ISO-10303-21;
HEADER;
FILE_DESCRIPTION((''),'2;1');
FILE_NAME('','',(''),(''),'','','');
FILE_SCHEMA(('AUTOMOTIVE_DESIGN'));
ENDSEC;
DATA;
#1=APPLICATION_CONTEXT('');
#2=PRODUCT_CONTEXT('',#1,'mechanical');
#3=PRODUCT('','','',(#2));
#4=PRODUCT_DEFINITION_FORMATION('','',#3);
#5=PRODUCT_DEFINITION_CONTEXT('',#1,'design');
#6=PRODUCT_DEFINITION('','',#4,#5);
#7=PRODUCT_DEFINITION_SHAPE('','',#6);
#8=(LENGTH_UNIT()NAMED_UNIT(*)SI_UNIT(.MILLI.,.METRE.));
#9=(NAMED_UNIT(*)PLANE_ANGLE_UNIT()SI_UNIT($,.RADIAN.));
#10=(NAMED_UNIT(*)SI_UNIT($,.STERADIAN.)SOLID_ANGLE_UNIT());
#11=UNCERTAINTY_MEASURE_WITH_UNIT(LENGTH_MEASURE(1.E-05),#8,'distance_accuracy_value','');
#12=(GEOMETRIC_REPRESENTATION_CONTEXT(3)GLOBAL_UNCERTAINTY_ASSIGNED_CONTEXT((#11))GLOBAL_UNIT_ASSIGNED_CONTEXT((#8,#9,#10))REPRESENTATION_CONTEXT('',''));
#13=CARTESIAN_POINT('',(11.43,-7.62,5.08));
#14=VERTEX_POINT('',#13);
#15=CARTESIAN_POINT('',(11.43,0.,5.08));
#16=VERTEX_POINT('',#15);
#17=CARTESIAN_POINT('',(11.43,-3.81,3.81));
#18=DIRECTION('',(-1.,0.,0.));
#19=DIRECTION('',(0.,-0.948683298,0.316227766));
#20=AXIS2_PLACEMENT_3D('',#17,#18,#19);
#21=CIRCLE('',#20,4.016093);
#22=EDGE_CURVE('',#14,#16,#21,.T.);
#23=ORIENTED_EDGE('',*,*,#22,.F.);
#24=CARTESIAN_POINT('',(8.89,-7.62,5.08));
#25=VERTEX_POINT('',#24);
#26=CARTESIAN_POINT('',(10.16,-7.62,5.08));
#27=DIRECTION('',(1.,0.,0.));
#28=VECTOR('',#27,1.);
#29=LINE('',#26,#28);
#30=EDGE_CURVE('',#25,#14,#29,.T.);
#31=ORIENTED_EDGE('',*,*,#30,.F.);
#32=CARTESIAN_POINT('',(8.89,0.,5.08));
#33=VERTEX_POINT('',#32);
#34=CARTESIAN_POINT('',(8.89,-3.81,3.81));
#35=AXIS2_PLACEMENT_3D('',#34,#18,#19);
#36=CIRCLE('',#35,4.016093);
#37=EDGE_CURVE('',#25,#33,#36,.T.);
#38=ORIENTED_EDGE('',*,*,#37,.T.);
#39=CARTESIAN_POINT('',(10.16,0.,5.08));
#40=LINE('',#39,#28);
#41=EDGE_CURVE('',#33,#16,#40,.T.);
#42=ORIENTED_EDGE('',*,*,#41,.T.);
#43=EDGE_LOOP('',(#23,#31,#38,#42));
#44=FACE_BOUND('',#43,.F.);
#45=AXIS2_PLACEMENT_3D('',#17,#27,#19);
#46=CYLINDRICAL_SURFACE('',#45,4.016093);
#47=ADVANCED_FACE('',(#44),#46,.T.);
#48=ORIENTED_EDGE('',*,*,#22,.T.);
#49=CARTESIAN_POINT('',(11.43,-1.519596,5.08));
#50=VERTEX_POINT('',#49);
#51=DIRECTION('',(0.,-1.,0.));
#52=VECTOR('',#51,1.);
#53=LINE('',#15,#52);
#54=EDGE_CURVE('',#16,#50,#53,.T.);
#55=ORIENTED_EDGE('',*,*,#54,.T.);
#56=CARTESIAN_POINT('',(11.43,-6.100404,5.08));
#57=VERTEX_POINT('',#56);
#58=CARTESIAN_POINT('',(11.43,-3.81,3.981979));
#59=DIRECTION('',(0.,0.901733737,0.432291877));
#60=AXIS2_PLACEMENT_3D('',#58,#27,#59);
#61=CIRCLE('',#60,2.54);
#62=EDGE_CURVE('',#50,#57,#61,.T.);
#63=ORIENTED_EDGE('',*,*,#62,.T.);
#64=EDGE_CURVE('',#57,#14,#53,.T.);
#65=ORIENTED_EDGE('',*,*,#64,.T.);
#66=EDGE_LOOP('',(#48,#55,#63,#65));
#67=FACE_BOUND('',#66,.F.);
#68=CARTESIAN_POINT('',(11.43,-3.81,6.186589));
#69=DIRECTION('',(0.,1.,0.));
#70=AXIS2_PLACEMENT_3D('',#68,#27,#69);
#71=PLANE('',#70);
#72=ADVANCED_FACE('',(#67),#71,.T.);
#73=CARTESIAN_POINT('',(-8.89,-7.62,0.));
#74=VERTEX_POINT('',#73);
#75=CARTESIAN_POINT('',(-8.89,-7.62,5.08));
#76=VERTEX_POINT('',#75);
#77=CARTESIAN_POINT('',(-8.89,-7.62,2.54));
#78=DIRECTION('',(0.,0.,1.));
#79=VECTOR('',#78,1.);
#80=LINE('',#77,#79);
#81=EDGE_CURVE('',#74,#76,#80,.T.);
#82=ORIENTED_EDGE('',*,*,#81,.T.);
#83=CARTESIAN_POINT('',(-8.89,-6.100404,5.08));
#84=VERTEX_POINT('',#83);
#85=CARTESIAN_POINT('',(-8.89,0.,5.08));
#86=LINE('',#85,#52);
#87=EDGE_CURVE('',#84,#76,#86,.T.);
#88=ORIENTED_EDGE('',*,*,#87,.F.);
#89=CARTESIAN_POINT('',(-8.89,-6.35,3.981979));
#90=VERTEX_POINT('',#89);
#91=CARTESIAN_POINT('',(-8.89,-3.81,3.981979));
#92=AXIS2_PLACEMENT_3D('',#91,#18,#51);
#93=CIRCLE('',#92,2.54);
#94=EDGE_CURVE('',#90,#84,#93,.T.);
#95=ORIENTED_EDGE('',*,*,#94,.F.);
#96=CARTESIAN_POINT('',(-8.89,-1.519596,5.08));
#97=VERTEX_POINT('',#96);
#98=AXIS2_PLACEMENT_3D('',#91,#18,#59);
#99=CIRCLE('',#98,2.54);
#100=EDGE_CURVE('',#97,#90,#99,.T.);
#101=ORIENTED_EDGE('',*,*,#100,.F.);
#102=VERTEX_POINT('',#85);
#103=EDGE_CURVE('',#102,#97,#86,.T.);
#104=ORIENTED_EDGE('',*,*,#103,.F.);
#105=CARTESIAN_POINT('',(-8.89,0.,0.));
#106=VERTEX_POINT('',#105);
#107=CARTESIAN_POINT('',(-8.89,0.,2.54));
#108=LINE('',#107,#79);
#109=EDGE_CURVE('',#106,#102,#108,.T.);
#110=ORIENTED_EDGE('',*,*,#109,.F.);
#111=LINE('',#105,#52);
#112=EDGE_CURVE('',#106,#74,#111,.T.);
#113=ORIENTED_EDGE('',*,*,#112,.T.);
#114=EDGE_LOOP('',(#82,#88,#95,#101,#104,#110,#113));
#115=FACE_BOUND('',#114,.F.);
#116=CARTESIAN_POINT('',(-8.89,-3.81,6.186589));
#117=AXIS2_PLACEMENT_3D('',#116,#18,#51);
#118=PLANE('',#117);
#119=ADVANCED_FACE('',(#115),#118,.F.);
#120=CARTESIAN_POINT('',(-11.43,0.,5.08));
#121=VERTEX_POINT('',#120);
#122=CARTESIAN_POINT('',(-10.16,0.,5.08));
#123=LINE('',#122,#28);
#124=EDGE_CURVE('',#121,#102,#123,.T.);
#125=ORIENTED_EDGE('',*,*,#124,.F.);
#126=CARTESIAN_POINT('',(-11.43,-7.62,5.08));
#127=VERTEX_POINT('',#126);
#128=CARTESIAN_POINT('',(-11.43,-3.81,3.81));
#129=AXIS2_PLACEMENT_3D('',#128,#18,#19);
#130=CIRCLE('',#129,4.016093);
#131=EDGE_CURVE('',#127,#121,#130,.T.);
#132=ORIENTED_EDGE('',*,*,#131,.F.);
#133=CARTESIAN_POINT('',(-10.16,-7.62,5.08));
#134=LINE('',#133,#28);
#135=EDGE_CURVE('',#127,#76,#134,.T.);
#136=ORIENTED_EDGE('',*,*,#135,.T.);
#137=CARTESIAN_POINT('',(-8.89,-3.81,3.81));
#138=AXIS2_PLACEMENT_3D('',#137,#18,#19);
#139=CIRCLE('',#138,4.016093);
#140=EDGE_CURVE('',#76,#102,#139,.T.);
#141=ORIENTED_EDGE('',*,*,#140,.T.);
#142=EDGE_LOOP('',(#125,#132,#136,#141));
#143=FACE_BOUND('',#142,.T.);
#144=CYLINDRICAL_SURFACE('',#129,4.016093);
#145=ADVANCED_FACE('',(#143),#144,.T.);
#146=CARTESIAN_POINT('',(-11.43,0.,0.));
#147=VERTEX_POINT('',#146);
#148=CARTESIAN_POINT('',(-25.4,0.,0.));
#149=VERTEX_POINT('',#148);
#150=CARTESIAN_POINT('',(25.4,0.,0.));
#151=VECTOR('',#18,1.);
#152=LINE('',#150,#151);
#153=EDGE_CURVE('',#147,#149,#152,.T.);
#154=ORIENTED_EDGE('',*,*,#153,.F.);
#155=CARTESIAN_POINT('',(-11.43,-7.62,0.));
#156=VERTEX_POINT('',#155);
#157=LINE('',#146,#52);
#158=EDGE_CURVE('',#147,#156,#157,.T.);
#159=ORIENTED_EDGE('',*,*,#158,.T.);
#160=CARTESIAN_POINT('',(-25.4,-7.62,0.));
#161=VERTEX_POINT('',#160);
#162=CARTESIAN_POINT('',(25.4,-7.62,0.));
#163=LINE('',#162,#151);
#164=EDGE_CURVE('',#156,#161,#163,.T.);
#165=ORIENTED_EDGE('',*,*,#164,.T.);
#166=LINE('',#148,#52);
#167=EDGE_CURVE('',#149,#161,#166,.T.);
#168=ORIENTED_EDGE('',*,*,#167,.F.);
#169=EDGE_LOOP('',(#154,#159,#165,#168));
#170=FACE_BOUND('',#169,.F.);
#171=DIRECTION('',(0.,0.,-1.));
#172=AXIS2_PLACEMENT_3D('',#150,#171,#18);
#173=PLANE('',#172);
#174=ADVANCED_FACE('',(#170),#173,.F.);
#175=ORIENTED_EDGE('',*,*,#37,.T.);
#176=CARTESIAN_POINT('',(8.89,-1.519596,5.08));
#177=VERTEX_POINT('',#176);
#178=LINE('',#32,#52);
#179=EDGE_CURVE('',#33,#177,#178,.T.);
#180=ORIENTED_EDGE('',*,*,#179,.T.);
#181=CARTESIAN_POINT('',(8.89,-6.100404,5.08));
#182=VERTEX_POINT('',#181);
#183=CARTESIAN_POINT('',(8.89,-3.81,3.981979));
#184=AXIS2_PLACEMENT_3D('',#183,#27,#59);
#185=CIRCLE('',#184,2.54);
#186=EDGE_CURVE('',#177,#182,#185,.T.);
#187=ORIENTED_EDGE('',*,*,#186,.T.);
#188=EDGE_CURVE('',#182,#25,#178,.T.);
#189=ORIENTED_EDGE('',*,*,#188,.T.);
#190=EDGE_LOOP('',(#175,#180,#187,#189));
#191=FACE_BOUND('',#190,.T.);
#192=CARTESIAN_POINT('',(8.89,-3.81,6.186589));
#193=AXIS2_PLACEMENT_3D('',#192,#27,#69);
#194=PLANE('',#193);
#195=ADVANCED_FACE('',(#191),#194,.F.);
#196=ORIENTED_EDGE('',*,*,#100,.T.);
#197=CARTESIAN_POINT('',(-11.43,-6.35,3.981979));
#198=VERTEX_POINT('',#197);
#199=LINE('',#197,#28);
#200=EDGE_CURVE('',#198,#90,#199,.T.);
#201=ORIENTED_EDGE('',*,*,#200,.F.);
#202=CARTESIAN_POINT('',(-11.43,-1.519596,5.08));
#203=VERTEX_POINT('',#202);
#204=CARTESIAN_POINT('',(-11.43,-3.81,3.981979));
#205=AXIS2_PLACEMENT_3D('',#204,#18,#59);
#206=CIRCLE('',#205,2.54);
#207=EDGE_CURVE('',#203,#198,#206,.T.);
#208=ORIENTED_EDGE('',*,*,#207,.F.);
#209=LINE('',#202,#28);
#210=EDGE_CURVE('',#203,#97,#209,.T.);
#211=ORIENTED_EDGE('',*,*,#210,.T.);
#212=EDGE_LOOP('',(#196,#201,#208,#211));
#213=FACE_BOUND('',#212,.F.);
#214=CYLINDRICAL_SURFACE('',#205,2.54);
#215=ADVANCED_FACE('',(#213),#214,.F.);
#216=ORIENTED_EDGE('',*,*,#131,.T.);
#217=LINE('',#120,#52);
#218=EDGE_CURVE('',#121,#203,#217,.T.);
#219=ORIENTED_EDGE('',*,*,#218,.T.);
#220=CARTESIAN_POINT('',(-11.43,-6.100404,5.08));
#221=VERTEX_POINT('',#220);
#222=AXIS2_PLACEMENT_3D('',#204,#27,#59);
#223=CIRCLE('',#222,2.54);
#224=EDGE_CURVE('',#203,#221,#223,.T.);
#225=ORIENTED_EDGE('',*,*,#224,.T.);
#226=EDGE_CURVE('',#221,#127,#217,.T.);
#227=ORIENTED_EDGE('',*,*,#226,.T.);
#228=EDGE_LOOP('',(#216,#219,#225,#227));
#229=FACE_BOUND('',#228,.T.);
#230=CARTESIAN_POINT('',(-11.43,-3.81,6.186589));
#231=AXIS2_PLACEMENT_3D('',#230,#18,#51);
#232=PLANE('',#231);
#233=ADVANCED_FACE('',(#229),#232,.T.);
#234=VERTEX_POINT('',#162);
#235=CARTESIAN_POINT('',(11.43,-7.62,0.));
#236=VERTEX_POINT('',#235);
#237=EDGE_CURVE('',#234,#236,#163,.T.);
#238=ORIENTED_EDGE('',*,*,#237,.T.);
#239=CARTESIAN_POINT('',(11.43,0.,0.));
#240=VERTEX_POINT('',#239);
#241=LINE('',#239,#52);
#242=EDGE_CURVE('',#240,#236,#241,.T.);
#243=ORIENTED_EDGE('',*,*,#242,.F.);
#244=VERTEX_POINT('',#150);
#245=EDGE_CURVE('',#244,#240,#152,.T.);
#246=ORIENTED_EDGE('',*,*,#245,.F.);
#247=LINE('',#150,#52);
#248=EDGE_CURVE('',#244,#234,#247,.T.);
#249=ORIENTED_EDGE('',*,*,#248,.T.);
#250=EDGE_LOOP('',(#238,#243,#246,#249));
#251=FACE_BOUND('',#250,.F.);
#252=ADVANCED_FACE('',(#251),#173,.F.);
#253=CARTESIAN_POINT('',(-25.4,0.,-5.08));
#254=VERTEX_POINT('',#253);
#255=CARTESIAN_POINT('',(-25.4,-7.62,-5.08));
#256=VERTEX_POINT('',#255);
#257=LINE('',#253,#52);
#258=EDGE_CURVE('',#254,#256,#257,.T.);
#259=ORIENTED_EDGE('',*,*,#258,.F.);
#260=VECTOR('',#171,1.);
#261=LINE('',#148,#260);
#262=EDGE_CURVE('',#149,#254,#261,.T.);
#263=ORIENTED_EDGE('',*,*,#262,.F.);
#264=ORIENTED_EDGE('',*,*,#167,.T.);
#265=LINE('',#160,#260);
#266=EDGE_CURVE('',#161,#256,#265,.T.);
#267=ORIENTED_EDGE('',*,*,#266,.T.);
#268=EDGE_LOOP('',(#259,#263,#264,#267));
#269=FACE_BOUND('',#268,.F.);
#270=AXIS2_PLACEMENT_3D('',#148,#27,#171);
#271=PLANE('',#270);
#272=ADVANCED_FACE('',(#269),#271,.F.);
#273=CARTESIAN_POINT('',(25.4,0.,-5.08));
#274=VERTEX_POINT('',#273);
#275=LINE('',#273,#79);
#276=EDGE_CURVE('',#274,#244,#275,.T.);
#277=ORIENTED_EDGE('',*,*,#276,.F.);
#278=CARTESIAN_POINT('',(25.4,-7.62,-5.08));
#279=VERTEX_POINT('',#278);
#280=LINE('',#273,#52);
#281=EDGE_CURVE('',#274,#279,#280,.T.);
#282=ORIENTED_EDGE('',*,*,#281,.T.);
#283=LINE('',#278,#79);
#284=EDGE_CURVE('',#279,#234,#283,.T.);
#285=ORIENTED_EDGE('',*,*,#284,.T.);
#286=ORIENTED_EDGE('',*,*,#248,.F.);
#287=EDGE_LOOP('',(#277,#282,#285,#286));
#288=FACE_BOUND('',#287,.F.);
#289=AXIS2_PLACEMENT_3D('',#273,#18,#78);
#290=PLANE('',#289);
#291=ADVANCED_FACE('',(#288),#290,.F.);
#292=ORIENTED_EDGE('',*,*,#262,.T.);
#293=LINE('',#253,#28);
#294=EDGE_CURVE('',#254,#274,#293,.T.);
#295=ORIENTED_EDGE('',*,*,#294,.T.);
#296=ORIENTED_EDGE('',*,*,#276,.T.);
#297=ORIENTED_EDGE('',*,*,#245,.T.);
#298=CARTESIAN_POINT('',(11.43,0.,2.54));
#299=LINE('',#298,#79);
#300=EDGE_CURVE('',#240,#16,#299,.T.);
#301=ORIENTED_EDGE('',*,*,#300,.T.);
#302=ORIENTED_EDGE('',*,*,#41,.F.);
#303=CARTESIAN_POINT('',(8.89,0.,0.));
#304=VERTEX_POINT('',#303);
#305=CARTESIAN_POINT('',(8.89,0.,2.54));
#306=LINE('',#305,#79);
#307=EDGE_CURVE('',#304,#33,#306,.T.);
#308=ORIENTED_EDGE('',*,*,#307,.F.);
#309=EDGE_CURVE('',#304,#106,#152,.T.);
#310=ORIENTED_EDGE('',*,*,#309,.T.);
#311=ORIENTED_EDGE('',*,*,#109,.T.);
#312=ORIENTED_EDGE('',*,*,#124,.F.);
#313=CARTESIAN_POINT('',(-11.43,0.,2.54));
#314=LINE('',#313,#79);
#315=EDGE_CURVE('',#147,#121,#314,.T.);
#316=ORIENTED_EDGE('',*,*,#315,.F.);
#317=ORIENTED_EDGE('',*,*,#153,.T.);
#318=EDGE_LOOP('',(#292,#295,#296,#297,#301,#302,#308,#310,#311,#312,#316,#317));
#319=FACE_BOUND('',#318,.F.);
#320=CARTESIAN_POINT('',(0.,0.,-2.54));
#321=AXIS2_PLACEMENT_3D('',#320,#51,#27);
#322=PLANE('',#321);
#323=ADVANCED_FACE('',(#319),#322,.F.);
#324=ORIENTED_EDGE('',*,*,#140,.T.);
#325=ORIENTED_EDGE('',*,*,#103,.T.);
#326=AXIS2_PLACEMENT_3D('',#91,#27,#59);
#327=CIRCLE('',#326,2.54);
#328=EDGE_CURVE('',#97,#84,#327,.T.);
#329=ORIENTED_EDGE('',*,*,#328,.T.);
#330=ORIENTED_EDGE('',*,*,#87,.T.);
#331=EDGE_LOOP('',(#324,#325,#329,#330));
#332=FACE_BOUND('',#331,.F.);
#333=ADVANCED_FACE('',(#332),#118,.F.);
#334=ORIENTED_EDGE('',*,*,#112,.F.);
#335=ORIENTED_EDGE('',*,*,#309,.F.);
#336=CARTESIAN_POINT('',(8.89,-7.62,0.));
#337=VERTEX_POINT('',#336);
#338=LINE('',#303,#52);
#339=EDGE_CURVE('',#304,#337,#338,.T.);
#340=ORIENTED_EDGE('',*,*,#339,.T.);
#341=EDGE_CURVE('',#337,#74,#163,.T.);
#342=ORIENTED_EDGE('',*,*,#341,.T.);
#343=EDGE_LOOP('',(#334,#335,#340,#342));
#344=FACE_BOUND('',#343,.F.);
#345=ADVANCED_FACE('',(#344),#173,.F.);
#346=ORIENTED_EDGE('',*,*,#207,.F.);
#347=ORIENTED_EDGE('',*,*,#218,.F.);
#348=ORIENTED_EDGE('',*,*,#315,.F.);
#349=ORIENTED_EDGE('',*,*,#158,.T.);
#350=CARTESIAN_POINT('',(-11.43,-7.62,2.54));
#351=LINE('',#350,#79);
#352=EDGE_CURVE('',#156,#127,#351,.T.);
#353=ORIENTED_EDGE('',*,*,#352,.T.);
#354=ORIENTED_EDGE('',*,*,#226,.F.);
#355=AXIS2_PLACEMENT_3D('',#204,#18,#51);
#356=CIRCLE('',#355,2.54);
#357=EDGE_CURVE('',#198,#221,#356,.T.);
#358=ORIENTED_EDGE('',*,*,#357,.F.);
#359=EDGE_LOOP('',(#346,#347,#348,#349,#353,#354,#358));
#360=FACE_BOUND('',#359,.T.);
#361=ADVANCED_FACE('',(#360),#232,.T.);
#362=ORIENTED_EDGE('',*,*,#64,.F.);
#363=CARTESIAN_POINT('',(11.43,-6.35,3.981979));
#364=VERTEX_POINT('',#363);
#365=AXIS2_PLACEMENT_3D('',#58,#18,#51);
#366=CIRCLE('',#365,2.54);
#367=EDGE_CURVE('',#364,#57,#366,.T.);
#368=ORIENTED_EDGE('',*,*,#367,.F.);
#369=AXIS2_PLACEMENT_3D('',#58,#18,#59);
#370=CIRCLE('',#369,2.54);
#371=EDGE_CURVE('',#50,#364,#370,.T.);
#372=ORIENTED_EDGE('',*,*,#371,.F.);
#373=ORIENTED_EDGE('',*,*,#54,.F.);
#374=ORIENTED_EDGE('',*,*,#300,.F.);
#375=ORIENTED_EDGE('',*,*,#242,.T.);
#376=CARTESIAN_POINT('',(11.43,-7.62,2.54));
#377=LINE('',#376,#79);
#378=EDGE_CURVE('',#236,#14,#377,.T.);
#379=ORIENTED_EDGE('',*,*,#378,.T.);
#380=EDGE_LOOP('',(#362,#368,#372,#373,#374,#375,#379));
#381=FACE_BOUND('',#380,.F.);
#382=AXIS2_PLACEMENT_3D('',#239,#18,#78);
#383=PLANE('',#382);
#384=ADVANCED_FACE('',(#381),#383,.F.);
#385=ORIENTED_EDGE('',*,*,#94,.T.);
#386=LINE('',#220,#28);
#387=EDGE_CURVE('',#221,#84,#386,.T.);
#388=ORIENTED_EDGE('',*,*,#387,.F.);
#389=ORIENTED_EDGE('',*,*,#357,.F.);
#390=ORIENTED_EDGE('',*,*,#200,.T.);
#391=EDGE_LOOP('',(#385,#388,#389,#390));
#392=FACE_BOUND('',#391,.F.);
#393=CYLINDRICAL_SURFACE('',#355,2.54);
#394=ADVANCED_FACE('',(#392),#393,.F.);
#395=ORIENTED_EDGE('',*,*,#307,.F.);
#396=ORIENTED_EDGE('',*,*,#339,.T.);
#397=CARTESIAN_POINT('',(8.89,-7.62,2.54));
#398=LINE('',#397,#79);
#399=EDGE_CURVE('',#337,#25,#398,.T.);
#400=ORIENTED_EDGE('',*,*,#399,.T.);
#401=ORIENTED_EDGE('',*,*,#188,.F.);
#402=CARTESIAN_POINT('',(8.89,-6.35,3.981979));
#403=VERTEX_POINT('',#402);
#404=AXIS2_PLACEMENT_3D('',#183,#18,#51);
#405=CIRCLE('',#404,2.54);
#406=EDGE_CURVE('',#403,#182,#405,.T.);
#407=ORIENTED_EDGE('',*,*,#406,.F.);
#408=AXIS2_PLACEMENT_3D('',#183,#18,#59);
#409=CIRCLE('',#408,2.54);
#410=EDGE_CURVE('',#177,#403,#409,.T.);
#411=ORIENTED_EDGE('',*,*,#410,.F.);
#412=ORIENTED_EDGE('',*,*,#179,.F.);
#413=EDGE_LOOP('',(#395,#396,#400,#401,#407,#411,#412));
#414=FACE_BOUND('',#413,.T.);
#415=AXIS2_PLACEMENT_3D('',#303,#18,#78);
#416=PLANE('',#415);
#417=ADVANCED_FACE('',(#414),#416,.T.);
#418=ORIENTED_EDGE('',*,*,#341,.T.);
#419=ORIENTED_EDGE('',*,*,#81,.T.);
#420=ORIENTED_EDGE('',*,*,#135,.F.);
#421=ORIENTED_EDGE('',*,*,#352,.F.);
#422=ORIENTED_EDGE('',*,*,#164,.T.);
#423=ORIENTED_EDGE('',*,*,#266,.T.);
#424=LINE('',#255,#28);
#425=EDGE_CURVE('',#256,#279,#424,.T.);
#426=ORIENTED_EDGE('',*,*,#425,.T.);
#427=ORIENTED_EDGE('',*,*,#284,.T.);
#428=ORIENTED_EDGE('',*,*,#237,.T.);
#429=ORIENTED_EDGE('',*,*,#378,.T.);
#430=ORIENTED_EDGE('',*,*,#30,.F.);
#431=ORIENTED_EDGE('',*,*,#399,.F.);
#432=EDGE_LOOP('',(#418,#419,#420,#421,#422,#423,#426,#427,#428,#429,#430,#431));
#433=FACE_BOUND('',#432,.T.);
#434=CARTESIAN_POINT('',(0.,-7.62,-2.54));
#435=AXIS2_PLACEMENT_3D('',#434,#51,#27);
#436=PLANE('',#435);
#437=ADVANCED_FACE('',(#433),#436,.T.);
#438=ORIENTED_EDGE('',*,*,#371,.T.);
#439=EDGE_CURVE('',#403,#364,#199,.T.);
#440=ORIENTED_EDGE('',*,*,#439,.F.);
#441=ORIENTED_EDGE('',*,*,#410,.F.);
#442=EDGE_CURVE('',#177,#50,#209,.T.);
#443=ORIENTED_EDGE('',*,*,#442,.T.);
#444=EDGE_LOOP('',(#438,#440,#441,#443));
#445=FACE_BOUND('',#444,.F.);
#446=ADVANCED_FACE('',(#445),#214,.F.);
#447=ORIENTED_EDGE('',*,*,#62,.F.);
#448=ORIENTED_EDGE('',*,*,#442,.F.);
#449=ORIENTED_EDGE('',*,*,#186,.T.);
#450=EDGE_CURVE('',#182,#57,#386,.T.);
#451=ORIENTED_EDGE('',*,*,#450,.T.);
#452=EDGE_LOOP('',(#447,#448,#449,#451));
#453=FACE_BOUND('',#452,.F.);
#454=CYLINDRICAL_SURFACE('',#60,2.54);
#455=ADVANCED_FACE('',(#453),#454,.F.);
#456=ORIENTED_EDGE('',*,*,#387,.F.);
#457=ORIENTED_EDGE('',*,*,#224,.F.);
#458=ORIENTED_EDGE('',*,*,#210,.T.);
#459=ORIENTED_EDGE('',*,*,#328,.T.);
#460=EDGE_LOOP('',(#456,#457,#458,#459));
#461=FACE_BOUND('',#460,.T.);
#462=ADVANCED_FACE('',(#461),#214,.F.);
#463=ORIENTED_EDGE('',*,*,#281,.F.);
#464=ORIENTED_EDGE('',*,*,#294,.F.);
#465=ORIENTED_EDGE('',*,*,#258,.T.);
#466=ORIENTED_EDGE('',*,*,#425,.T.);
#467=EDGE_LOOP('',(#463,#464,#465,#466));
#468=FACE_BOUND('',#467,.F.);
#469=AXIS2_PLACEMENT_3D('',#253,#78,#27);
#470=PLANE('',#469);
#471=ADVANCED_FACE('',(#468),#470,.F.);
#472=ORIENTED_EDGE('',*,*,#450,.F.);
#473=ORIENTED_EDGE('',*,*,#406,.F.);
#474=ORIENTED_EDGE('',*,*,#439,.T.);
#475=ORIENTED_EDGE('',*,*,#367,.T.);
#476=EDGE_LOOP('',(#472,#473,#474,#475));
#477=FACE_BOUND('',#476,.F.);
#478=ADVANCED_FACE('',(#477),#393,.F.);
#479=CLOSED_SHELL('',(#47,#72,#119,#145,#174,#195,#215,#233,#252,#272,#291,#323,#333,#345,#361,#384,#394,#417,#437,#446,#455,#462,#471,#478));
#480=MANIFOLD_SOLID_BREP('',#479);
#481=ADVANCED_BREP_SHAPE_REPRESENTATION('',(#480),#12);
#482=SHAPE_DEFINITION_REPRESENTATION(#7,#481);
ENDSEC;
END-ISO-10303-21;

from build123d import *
from build123d import SkipClean  # not in build123d's __all__

# Parameters (mm, degrees)
F1_DEPTH = 7.62
F2_DEPTH = 7.62
F0_W     = 2.54
F0_H     = 5.08
F3_DEPTH = 7.62
F5_DEPTH = 2.54
F6_DEPTH = 36.831


# Not quite as in the source:
# - a feature names something its author has since deleted; it is built from what else it names


with BuildPart() as f1:
    # F0 (on Front) → F1 (new body)
    with BuildSketch(Plane.XZ):
        Polygon((8.89, 0), (0, 0), (-8.89, 0), (-11.43, 0), (-25.4, 0), (-25.4, -5.08), (25.4, -5.08), (25.4, 0), (11.43, 0), align=None)
    extrude(amount=F1_DEPTH)

    # F0 (on Front) → F2 (join)
    with BuildSketch(Plane.XZ):
        Polygon((8.89, 0), (0, 0), (-8.89, 0), (-11.43, 0), (-25.4, 0), (-25.4, -5.08), (25.4, -5.08), (25.4, 0), (11.43, 0), align=None)
    extrude(amount=F2_DEPTH)

    # F0 (on Front) → F3 (join)
    with BuildSketch(Plane.XZ):
        with Locations((-10.16, 2.54)):
            Rectangle(F0_W, F0_H)
        with Locations((10.16, 2.54)):
            Rectangle(F0_W, F0_H)
    extrude(amount=F3_DEPTH)

    # F4 (on face) → F5 (join)
    with BuildSketch(Plane(origin=(-11.43, 0, 0), x_dir=(0, -1, 0), z_dir=(-1, 0, 0))):
        with BuildLine():
            Line((6.1004036929, 5.08), (7.62, 5.08))
            ThreePointArc((7.62, 5.08), (3.81, 7.8260926284), (0, 5.08))
            Line((0, 5.08), (1.5195963071, 5.08))
            ThreePointArc((1.5195963071, 5.08), (3.81, 6.5219786325), (6.1004036929, 5.08))
        make_face()
    extrude(amount=-F5_DEPTH)

    # F4 (on face) → F6 (cut, through all)
    with BuildSketch(Plane(origin=(-11.43, 0, 0), x_dir=(0, -1, 0), z_dir=(-1, 0, 0))):
        with BuildLine():
            ThreePointArc((6.35, 3.9819786325), (6.2868150294, 4.5449948934), (6.1004036929, 5.08))
            Line((6.1004036929, 5.08), (1.5195963071, 5.08))
            ThreePointArc((1.5195963071, 5.08), (3.2469837391, 1.5051636031), (6.35, 3.9819786325))
        make_face()
    with SkipClean():  # cleaning this boolean's faces spoils the solid; the shape is the same uncleaned
        extrude(amount=-F6_DEPTH, mode=Mode.SUBTRACT)

    # F7: F1 across plane


with BuildPart() as f1_1:
    add(f1.part, clean=False)
    with SkipClean():  # cleaning this boolean's faces spoils the solid; the shape is the same uncleaned
        add(f1.part.mirror(Plane.YZ), clean=False)


solid = f1_1.part
